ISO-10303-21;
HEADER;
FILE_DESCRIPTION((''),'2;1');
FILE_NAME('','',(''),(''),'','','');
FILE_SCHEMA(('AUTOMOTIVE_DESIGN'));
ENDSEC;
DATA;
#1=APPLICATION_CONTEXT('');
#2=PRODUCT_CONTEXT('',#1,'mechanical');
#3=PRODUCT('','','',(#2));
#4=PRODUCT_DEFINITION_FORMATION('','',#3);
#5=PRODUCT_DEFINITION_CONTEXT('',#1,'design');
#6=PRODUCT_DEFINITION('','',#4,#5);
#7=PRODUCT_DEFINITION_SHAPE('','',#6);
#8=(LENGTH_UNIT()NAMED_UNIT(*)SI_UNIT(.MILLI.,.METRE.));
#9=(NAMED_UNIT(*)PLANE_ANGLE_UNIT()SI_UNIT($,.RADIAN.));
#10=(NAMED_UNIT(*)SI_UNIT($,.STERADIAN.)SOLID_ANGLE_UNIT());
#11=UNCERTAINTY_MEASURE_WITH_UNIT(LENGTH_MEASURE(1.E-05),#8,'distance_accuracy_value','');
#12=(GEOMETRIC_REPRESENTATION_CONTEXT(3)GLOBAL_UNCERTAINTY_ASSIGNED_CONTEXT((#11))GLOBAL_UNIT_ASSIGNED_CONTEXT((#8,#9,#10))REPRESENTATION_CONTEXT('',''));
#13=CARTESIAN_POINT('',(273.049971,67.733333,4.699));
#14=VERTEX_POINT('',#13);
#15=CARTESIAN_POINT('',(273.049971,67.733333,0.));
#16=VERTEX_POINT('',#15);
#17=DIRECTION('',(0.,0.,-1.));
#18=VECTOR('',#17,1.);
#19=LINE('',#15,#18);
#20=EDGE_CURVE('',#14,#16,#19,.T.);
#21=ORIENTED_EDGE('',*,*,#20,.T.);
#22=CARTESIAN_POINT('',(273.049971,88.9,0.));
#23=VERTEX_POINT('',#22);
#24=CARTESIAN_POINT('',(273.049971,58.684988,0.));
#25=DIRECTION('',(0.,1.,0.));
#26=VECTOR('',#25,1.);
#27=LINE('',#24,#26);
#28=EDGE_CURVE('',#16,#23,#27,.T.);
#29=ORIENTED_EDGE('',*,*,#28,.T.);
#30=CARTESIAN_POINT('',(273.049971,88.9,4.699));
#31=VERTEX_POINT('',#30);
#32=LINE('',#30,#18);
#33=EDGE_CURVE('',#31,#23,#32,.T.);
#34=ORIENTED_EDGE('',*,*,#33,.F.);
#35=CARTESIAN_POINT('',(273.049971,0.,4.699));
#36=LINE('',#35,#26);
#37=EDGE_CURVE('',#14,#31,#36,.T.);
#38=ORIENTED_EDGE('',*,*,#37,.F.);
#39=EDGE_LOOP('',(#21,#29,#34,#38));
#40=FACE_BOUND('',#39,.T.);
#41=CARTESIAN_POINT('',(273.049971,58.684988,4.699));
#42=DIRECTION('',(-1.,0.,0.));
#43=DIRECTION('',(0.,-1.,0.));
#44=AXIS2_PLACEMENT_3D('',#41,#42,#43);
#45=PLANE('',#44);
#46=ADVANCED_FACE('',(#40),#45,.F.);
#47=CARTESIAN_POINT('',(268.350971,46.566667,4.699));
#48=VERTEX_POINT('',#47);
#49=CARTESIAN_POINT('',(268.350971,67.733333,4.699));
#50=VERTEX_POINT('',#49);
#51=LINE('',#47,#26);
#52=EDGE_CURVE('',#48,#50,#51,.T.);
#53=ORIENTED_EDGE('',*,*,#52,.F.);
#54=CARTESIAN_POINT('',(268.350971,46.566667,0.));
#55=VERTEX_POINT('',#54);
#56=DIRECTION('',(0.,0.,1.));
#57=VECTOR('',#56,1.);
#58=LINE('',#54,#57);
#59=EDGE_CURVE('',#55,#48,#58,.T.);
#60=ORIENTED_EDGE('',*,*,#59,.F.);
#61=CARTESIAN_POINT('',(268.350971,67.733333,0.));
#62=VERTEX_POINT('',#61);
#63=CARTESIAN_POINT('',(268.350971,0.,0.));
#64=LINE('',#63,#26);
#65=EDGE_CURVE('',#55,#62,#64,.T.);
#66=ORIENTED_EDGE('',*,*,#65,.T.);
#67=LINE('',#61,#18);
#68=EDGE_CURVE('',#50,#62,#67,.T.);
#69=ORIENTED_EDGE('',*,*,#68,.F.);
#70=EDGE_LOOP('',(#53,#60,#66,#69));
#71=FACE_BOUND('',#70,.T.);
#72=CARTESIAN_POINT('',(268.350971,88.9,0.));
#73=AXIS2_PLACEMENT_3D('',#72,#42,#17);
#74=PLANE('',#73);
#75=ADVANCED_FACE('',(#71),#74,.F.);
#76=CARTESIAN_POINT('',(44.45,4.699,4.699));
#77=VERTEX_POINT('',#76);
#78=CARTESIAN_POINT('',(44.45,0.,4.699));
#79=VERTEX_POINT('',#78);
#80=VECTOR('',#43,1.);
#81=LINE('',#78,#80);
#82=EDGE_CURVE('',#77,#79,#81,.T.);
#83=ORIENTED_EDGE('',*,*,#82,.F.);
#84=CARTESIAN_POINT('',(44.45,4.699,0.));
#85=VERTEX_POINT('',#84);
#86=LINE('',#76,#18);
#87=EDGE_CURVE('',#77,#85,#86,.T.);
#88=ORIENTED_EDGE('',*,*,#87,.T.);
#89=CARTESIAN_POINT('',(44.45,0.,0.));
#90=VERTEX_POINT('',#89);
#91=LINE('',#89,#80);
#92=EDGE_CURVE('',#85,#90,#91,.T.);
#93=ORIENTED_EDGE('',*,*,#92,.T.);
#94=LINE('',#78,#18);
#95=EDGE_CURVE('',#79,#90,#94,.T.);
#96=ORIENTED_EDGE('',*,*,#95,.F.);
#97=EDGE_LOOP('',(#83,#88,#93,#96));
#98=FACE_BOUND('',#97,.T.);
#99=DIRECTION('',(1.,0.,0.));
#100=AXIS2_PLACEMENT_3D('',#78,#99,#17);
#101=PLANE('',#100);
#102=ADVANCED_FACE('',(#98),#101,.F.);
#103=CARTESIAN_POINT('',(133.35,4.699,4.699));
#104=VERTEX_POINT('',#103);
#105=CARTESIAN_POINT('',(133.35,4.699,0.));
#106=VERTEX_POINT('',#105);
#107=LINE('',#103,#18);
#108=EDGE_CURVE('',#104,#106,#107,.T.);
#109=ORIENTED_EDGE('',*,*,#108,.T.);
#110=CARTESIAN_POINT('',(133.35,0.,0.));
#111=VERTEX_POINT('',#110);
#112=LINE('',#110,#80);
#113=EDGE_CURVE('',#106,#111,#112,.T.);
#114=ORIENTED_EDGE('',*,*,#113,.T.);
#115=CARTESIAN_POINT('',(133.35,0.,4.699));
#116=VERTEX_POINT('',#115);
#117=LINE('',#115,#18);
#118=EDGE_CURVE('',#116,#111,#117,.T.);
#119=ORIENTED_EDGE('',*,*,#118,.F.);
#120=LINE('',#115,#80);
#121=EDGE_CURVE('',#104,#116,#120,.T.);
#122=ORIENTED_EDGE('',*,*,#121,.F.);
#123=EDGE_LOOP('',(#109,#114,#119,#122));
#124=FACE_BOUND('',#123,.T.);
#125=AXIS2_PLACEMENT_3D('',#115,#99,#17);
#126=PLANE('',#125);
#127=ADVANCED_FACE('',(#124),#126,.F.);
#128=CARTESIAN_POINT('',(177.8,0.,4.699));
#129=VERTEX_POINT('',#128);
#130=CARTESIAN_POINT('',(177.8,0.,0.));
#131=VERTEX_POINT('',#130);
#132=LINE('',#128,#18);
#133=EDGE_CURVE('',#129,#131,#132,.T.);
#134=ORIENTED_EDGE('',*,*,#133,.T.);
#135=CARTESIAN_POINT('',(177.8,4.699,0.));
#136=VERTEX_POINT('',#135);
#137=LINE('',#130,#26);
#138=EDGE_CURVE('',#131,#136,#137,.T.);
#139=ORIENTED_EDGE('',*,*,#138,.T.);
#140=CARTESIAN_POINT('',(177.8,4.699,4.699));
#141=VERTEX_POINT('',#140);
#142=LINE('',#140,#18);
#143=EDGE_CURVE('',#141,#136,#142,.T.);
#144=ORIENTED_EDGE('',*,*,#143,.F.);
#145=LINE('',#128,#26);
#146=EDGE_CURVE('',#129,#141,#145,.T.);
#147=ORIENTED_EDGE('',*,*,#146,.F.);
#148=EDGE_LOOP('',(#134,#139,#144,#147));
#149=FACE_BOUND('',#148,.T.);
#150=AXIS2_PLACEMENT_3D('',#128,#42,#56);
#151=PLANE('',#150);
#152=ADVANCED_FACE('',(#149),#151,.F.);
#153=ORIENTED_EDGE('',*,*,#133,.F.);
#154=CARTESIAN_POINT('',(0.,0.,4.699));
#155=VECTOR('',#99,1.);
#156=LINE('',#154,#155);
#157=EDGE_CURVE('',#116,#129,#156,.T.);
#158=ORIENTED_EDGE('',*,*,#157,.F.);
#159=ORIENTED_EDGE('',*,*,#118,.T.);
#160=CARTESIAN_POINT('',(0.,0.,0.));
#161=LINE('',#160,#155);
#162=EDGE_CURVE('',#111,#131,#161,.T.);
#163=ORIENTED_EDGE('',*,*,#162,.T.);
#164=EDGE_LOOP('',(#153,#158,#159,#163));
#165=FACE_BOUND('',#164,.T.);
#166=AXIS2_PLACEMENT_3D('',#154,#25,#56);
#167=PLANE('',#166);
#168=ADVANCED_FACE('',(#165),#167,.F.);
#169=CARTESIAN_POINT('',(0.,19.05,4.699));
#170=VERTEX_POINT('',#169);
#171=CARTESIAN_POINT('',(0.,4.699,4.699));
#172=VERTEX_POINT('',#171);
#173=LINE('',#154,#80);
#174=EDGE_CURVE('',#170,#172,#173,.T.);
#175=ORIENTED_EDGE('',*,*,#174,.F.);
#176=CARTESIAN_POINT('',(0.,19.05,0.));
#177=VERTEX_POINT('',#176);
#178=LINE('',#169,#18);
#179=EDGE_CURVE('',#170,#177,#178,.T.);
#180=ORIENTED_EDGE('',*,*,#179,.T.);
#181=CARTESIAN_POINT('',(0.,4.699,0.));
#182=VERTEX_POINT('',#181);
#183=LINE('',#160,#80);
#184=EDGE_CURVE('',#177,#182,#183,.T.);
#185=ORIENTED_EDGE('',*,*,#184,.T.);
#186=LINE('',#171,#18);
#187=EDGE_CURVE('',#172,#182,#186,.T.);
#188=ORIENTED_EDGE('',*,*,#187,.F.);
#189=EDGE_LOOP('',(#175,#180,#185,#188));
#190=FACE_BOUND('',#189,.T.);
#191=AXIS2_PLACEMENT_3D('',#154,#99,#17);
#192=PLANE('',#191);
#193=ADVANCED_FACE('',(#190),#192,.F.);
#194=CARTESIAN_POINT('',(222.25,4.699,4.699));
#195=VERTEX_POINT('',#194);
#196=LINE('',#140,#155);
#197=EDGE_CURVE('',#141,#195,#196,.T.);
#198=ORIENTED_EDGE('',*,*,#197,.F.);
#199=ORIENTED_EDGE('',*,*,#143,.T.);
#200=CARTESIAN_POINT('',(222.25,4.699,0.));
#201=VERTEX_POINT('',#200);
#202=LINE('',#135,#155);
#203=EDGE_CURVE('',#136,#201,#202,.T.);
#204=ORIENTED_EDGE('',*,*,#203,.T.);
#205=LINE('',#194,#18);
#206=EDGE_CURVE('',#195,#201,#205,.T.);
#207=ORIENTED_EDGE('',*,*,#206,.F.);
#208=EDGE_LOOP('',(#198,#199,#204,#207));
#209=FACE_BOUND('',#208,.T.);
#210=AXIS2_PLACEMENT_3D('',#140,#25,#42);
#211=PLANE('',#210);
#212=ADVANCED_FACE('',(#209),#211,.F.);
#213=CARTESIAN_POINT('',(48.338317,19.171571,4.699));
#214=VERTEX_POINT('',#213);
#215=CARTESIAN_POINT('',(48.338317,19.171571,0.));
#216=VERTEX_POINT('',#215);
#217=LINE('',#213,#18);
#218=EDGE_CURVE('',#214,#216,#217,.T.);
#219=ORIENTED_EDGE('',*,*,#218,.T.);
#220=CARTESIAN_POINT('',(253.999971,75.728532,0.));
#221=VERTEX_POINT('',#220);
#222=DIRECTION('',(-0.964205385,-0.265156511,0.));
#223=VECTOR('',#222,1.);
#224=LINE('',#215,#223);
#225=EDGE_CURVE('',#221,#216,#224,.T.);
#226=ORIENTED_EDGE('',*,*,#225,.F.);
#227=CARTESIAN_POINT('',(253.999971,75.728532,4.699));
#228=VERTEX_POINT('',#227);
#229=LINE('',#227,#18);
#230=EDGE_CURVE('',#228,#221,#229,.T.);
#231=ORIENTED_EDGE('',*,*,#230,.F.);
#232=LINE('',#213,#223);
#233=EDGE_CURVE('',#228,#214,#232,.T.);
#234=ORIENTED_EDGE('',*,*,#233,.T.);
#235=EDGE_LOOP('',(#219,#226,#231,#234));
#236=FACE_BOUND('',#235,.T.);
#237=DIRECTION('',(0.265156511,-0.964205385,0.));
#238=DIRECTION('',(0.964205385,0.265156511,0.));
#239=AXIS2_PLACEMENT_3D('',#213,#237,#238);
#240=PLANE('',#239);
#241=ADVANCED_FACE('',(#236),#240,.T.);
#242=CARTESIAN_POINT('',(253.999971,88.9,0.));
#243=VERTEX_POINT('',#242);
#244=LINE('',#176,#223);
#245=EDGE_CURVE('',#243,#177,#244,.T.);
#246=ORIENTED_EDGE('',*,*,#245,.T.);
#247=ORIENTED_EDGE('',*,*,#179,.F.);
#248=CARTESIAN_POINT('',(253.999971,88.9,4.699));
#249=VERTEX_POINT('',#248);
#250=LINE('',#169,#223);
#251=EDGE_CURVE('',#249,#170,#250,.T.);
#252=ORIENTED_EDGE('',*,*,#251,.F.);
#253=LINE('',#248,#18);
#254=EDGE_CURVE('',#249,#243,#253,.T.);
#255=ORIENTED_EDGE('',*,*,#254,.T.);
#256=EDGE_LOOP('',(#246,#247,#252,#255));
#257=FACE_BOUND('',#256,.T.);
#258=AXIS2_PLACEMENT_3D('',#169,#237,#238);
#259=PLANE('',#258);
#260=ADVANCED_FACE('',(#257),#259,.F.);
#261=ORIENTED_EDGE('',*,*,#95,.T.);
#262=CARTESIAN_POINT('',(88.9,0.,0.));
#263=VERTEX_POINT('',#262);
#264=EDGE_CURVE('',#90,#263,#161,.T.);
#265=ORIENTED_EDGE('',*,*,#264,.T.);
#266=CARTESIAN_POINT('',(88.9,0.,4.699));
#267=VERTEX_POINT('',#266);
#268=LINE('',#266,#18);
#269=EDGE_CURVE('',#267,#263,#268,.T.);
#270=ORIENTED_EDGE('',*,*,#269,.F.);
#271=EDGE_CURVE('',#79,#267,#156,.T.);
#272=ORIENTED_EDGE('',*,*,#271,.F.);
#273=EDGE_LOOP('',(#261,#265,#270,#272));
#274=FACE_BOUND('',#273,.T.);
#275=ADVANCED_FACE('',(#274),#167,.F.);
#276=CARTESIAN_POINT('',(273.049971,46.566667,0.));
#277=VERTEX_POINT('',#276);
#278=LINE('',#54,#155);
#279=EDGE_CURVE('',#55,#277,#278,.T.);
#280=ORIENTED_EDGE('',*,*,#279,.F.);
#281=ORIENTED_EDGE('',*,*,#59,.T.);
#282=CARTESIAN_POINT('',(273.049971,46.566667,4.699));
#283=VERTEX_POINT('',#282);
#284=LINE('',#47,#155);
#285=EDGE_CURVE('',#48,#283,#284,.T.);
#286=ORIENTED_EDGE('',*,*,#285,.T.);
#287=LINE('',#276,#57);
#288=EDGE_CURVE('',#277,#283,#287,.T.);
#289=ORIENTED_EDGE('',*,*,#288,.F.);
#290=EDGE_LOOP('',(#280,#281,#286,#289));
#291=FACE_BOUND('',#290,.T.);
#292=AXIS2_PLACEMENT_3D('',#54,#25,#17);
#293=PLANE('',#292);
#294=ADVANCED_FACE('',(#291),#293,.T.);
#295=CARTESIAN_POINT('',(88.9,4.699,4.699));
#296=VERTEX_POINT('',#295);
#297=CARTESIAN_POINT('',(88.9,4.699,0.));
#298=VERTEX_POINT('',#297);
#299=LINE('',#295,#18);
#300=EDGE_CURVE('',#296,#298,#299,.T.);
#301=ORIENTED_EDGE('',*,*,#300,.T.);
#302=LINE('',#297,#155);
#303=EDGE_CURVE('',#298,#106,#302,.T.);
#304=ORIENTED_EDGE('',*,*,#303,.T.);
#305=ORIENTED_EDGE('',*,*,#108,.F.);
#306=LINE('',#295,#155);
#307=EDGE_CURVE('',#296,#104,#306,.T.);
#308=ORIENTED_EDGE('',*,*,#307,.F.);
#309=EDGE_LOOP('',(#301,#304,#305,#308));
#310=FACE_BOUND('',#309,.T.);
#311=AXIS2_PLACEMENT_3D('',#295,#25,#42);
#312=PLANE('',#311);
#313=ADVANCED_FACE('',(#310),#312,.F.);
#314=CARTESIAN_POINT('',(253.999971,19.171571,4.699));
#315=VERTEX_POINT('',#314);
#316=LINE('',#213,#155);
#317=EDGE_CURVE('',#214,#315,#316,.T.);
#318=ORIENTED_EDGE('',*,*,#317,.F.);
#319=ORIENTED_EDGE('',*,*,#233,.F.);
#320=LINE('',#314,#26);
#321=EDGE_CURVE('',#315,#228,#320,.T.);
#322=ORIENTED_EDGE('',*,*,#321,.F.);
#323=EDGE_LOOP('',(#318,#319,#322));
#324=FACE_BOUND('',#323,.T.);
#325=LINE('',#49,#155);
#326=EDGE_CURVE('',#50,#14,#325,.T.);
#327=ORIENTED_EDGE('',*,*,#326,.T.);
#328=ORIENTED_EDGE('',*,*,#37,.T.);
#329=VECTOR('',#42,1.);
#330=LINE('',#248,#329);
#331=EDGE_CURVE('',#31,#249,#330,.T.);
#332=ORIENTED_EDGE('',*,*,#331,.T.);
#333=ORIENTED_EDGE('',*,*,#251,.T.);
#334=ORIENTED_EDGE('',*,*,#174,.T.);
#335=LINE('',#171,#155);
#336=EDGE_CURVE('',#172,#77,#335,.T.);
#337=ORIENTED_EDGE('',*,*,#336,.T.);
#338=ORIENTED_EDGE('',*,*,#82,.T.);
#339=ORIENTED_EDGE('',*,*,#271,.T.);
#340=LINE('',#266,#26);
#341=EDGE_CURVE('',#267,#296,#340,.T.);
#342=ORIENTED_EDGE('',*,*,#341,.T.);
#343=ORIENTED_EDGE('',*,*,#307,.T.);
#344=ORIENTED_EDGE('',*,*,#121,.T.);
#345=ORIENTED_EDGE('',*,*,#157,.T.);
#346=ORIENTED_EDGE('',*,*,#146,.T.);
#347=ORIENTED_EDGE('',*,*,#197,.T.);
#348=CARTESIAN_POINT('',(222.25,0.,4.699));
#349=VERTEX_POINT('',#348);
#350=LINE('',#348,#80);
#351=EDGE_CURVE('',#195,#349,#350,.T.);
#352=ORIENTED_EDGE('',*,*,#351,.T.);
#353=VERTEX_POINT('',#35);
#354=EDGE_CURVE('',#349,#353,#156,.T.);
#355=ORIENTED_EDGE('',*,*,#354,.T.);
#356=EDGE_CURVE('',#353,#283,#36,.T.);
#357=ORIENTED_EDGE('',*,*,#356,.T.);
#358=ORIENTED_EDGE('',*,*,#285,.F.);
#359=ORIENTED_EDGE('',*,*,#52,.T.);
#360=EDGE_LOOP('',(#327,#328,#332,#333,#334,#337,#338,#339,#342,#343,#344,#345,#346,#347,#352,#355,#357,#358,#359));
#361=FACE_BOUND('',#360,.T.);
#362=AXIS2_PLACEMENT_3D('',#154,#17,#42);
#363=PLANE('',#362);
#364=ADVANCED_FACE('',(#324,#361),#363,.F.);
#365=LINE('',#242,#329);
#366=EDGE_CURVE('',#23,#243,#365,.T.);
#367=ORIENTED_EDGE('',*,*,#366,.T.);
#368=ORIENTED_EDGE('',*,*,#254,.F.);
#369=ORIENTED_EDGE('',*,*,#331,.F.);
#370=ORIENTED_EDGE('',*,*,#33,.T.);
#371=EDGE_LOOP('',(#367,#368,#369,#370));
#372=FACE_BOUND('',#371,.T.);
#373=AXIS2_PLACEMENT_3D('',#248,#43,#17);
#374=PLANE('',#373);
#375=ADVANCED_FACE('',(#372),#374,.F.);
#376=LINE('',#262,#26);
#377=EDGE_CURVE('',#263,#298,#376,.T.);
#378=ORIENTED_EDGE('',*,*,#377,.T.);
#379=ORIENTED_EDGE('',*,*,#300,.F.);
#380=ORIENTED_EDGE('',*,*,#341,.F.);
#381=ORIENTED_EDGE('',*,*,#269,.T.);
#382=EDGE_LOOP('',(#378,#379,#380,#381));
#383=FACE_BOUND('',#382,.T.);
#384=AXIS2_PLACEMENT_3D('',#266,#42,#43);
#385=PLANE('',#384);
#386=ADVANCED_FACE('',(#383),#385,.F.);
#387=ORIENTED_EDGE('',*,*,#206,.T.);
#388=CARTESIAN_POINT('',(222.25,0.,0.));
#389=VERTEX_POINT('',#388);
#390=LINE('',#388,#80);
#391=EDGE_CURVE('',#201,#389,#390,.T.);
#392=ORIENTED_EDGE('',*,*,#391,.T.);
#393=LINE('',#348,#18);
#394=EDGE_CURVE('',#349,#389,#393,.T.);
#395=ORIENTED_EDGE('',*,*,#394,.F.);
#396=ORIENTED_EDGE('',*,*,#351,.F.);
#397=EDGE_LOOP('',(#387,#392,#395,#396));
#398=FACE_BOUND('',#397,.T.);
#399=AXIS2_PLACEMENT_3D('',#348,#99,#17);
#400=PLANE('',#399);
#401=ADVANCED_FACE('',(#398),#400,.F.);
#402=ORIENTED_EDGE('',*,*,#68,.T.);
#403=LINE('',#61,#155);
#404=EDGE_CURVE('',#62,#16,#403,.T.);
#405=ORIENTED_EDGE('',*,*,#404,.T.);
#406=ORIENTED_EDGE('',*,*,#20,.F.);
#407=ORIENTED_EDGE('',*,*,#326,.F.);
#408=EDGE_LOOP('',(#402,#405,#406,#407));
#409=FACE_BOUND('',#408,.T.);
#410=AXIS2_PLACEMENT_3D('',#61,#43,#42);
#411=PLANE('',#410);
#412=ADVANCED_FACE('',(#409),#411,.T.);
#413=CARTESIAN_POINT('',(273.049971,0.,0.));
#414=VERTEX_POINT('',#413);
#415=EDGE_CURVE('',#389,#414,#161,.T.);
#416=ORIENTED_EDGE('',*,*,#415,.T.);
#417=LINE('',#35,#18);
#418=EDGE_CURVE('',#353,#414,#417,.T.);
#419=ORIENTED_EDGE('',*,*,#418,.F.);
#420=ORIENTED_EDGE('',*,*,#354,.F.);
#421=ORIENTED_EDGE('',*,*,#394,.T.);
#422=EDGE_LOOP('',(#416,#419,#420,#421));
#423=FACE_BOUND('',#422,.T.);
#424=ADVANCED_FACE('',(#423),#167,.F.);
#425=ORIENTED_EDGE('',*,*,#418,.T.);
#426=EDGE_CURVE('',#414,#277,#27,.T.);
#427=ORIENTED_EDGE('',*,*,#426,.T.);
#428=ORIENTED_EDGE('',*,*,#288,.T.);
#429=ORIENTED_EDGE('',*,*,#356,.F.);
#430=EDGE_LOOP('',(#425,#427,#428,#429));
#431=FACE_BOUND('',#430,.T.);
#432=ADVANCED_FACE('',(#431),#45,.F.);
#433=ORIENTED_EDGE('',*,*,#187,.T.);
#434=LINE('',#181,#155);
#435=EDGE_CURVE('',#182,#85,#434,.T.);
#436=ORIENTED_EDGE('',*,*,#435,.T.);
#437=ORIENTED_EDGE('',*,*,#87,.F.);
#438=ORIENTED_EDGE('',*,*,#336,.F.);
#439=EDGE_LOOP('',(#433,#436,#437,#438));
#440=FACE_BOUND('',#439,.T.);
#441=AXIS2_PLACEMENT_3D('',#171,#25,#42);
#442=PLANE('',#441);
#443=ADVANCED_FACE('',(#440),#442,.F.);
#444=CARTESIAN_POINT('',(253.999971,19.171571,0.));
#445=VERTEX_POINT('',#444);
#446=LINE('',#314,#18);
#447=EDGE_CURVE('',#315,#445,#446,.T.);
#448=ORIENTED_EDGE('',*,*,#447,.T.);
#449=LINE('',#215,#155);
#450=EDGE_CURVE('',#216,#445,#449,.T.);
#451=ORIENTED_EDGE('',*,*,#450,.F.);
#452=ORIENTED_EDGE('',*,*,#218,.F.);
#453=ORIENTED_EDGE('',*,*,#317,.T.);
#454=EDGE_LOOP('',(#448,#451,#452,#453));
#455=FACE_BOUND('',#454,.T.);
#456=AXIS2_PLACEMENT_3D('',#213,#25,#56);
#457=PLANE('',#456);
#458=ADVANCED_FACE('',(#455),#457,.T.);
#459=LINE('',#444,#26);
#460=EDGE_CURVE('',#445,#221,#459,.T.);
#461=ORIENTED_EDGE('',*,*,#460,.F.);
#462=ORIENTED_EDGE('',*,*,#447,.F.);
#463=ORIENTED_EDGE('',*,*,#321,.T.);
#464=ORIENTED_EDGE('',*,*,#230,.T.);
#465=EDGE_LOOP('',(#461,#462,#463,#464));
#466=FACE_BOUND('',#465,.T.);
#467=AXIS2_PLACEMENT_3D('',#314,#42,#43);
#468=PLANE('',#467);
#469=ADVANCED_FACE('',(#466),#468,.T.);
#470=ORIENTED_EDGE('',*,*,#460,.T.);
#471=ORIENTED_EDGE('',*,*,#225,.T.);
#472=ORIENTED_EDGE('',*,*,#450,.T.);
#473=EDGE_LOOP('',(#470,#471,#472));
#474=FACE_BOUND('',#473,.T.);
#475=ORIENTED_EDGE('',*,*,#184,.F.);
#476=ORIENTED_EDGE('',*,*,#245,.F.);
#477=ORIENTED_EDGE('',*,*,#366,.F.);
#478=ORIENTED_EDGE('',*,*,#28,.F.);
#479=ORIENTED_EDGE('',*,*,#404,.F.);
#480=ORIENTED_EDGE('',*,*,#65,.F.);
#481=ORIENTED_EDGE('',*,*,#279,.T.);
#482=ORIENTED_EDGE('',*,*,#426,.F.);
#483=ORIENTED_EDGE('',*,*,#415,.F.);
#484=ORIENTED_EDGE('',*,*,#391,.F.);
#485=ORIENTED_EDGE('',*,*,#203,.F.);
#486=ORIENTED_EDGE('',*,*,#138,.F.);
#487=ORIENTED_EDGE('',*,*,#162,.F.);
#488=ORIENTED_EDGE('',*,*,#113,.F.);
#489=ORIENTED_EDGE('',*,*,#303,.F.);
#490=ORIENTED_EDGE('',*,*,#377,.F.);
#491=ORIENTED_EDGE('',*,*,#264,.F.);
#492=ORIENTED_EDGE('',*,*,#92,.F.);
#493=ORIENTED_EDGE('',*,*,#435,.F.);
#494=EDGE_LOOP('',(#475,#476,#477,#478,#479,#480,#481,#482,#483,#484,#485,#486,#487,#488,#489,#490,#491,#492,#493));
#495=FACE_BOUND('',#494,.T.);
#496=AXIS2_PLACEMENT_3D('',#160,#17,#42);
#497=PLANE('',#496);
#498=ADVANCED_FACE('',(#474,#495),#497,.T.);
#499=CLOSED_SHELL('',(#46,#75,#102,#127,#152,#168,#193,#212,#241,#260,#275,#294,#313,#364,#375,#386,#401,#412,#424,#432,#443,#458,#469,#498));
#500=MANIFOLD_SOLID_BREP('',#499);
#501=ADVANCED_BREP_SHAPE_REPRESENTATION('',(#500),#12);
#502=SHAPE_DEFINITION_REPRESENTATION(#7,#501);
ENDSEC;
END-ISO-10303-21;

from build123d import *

# Parameters (mm, degrees)
BOSS_EXTRUDE1_DEPTH = 4.699
SKETCH2_W           = 44.45
SKETCH2_H           = 4.699
CUT_EXTRUDE1_DEPTH  = 288.196060581
CAVITY3_START       = 268.350970906
CAVITY3_OUTLINE_W   = 21.166666666
CAVITY3_OUTLINE_H   = 4.699
CAVITY3_DEPTH       = 4.699


# Read off the part's stored shape, not the designer's step: Cavity3
with BuildPart() as part:
    # Sketch1 → Boss-Extrude1 (new body)
    with BuildSketch(Plane.XY):
        Polygon((273.049970906, 58.684987569), (273.049970906, 88.9), (253.999970906, 88.9), (0, 19.05), (0, 0), (273.049970906, 0), (273.049970906, 30.215012431), align=None)
        Polygon((48.33831711, 19.171571116), (253.999970906, 19.171571116), (253.999970906, 75.728532388), align=None, mode=Mode.SUBTRACT)
    extrude(amount=BOSS_EXTRUDE1_DEPTH)

    # Sketch2 → Cut-Extrude1 (cut, through all)
    with BuildSketch(Plane(origin=(0, 0, 0), x_dir=(-1, 0, 0), z_dir=(0, 0, -1))):
        with Locations((-22.225, 2.3495)):
            Rectangle(SKETCH2_W, SKETCH2_H)
        with Locations((-111.125, 2.3495)):
            Rectangle(SKETCH2_W, SKETCH2_H)
        with Locations((-200.025, 2.3495)):
            Rectangle(SKETCH2_W, SKETCH2_H)
    extrude(amount=-CUT_EXTRUDE1_DEPTH, mode=Mode.SUBTRACT)

    # Cavity3 outline → Cavity3 (cut)
    with BuildSketch(Plane.YZ.offset(CAVITY3_START)):
        with Locations((57.15, 2.3495)):
            Rectangle(CAVITY3_OUTLINE_W, CAVITY3_OUTLINE_H)
    extrude(amount=CAVITY3_DEPTH, mode=Mode.SUBTRACT)


solid = part.part
